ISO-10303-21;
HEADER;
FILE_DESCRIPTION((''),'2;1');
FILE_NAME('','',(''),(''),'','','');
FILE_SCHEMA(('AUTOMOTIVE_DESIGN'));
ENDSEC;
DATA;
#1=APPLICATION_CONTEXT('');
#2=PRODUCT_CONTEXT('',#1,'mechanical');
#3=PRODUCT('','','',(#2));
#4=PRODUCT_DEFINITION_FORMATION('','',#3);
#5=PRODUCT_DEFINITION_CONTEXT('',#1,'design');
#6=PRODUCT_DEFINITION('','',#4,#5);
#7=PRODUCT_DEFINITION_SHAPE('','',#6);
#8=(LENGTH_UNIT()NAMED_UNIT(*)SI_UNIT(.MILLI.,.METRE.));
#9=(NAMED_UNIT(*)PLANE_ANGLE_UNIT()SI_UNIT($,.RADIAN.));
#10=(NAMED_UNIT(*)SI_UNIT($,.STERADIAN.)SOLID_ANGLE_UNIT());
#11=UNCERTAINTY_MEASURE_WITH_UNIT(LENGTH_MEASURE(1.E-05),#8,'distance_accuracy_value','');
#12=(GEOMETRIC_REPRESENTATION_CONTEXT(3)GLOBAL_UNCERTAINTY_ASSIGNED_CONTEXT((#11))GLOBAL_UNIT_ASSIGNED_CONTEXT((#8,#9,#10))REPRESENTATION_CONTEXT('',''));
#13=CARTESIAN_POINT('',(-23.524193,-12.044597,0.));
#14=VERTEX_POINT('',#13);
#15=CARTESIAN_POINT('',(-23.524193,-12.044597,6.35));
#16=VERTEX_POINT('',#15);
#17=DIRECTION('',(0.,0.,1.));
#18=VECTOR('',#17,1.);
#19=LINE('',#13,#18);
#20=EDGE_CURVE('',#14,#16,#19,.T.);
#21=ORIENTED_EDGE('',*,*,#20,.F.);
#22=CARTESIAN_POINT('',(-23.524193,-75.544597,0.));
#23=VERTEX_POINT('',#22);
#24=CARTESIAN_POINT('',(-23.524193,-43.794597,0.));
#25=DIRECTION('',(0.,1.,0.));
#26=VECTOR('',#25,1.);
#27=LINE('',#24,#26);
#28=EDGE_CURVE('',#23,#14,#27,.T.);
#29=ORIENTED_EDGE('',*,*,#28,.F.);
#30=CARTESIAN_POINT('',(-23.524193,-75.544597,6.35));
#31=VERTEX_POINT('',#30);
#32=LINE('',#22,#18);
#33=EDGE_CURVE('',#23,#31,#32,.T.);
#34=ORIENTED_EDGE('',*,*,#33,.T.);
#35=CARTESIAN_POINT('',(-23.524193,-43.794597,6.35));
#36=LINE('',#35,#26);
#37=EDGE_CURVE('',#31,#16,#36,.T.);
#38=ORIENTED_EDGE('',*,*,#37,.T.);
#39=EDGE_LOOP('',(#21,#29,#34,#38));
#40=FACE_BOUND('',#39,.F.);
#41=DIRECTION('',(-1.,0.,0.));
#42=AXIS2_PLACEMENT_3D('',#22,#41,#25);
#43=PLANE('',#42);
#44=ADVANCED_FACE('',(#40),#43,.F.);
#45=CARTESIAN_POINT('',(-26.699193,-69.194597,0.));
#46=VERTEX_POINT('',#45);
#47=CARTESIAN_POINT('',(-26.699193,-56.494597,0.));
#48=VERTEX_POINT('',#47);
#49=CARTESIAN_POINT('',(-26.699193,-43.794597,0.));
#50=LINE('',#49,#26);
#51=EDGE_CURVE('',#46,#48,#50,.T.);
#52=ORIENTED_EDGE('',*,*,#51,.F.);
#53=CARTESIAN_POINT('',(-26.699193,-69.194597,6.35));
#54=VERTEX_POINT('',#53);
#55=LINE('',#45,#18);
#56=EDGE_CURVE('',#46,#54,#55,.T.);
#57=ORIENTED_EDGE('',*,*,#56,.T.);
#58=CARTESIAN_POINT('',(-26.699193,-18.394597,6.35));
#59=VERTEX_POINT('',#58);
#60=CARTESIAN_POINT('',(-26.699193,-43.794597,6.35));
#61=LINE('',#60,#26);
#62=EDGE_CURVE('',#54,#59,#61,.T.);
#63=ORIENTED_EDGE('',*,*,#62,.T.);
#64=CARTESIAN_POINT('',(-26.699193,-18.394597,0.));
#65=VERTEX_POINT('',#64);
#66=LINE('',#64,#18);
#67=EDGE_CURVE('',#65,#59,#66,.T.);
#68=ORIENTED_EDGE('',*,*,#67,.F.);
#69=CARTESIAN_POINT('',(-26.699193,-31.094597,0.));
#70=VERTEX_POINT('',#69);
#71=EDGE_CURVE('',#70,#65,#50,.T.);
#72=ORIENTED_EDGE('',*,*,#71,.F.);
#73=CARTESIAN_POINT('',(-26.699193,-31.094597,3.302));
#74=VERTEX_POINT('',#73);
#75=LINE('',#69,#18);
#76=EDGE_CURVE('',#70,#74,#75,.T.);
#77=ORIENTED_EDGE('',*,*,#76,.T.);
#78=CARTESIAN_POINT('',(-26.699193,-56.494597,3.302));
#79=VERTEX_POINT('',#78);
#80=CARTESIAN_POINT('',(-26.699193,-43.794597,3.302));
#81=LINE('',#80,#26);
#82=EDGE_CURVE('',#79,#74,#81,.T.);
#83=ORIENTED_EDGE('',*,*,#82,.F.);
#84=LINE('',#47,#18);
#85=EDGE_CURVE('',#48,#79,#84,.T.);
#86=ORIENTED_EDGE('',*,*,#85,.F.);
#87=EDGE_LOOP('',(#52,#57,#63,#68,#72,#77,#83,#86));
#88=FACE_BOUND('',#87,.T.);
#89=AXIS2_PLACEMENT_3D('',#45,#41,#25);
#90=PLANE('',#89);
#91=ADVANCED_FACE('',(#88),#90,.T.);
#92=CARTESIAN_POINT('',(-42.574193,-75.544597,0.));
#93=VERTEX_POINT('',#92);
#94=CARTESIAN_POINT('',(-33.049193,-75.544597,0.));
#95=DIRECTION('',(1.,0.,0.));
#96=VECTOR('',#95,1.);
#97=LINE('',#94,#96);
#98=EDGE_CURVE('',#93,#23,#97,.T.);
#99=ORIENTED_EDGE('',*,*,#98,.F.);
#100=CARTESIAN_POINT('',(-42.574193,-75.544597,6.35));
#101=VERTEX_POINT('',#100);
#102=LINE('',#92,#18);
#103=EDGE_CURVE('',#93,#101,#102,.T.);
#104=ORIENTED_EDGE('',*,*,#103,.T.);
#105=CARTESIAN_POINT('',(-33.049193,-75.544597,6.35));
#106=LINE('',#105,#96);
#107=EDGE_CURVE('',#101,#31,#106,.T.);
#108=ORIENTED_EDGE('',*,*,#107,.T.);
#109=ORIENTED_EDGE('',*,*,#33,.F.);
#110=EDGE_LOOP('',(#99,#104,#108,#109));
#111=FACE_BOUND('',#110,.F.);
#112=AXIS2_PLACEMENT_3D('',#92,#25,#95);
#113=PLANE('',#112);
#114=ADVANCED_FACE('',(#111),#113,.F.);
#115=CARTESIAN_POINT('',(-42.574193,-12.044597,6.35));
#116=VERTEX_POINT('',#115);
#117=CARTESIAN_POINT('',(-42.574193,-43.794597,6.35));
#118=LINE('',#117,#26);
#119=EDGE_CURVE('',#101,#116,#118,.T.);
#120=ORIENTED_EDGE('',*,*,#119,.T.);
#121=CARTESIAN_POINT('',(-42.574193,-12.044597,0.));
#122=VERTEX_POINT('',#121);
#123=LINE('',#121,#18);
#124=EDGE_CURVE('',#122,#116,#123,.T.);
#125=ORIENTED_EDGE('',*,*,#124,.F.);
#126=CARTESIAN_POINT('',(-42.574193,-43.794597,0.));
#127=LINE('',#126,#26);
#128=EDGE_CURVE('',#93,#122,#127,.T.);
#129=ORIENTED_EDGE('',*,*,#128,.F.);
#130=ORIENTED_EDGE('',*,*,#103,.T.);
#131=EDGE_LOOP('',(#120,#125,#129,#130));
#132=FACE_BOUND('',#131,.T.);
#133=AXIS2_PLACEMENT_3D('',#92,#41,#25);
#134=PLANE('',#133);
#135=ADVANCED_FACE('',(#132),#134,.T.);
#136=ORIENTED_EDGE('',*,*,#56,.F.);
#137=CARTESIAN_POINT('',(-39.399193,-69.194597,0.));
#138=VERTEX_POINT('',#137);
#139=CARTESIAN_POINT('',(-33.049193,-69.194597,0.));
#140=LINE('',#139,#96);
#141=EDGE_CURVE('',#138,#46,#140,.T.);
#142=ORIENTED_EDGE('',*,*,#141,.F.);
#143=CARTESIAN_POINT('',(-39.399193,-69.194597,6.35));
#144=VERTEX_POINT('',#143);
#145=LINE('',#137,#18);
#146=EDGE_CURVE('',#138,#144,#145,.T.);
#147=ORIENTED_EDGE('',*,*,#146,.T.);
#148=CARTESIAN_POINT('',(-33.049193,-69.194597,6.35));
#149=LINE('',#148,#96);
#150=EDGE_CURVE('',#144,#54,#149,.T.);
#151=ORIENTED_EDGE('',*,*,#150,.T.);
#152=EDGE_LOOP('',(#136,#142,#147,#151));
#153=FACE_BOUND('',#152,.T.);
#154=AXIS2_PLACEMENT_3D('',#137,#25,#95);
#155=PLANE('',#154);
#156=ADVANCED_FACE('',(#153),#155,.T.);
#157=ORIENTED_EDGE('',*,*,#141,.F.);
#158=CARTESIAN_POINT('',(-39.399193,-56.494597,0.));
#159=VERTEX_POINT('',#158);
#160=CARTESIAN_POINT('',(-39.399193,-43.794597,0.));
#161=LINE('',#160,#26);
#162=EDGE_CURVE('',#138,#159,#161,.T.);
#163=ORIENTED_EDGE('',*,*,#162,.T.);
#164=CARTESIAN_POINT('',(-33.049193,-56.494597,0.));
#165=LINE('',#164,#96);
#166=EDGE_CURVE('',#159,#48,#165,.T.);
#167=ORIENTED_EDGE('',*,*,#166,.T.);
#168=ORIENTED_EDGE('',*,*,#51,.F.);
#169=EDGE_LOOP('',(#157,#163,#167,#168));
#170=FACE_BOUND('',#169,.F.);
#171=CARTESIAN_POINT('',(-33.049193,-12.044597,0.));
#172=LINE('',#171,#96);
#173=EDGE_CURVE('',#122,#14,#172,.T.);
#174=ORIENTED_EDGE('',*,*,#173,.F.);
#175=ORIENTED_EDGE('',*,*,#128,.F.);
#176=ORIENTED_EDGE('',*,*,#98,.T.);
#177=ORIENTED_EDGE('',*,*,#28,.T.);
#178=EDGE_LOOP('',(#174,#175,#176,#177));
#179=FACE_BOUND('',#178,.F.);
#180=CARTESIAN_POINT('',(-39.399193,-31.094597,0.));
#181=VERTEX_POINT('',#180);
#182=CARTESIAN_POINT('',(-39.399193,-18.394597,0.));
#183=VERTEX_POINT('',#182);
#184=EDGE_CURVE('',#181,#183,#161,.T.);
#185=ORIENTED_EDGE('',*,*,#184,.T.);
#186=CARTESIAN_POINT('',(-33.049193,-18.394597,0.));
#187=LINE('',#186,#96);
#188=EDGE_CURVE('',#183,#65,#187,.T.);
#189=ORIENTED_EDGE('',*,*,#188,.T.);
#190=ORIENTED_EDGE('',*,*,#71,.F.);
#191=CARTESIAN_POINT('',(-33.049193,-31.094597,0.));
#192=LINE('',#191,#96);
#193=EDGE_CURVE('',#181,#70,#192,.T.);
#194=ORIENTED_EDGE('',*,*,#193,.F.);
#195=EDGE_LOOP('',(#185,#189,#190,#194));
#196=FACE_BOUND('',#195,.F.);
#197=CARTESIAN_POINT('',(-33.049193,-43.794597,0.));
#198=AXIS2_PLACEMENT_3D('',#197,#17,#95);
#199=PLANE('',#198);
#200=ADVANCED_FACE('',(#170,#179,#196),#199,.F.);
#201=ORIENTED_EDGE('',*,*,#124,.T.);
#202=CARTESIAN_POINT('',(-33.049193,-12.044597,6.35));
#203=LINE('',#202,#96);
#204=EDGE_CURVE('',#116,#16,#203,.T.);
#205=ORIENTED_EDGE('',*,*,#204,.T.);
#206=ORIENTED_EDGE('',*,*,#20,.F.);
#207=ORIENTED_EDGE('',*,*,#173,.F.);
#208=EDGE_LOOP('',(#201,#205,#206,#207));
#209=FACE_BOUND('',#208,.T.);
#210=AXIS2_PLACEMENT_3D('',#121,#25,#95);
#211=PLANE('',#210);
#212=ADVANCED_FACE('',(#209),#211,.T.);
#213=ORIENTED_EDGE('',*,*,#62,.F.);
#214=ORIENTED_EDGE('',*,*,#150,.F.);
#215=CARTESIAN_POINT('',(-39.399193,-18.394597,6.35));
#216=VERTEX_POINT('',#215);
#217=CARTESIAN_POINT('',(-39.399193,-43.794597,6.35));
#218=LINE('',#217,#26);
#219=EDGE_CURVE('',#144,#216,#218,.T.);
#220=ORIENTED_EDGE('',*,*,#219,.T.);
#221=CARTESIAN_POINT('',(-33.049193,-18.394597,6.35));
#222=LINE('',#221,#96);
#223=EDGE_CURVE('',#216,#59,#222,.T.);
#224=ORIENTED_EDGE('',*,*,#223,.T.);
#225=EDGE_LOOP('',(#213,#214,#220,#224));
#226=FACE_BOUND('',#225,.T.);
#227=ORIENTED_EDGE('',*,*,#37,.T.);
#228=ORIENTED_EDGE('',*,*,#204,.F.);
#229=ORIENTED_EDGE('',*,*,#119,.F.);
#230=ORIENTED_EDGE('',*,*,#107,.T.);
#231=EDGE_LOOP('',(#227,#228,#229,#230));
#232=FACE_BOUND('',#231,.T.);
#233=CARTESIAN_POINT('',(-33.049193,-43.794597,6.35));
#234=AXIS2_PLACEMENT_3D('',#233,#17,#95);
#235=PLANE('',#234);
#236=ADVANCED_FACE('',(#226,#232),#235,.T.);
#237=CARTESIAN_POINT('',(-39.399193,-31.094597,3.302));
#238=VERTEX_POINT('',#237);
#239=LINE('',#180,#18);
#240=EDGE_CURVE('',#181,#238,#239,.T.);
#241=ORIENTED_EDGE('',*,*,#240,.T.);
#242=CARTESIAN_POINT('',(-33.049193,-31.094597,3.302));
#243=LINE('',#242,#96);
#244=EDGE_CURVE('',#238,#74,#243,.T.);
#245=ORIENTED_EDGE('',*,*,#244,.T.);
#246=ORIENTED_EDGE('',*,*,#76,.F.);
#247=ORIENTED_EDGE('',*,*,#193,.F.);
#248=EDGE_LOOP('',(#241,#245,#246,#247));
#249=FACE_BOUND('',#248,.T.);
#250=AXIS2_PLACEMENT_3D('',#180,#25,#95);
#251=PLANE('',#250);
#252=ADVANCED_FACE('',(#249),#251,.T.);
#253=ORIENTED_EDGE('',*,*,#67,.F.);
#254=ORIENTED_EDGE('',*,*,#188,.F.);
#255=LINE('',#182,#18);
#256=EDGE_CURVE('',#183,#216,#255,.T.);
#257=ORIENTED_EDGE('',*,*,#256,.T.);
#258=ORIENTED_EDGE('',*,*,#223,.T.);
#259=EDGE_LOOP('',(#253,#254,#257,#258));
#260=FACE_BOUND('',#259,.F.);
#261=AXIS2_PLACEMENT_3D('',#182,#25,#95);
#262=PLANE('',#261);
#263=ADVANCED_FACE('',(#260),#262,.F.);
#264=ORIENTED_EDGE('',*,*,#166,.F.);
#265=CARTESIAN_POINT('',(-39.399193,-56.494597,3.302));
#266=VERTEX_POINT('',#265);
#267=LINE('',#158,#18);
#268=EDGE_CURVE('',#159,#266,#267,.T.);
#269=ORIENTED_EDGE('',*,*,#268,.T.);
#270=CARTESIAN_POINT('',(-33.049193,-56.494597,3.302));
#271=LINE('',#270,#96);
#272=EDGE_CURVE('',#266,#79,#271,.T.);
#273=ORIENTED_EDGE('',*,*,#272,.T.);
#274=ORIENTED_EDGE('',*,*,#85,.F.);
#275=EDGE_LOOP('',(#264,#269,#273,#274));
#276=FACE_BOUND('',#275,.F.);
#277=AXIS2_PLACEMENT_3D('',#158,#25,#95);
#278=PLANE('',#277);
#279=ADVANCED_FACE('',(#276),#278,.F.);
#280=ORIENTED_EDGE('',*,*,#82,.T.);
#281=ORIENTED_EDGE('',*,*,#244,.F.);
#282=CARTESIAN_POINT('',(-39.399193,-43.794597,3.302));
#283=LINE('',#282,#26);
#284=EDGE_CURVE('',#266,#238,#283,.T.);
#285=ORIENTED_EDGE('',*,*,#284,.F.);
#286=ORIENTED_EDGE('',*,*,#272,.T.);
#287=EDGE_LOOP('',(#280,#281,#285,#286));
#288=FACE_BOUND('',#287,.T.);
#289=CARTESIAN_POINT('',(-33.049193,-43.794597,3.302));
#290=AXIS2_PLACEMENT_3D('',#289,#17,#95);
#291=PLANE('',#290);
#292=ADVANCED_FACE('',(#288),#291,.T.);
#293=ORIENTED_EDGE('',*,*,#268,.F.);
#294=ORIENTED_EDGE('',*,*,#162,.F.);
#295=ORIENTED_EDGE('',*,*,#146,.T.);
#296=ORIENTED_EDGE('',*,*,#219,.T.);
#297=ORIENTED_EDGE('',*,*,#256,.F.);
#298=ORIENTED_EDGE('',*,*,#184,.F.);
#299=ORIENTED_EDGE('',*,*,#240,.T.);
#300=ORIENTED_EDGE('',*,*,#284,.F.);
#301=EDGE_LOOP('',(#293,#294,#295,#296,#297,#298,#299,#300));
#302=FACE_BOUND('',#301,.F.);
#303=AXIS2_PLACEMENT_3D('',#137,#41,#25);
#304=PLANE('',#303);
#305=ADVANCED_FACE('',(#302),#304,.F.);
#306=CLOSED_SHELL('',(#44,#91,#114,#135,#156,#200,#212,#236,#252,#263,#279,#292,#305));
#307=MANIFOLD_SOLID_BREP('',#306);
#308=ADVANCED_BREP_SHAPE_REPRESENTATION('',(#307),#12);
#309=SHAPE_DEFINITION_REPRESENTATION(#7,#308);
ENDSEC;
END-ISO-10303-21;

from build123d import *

# Parameters (mm, degrees)
F0_W     = 19.05
F0_H     = 63.5
F0_W_2   = 12.7
F0_H_2   = 50.8
F1_DEPTH = 6.35
F2_W     = 12.7
F2_H     = 25.4
F3_DEPTH = 3.302


# Not quite as in the source:
# - the program builds the solid bodies; features that only make, move or delete a surface that nothing else refers to are left out


with BuildPart() as f1:
    # F0 (on Top) → F1 (new body)
    with BuildSketch(Plane.XY):
        with Locations((-33.0491933286, -43.7945974991)):
            Rectangle(F0_W, F0_H)
        with Locations((-33.0491933286, -43.7945974991)):
            Rectangle(F0_W_2, F0_H_2, mode=Mode.SUBTRACT)
    extrude(amount=F1_DEPTH)

    # F2 (on Top) → F3 (join)
    with BuildSketch(Plane.XY):
        with Locations((-33.0491933286, -43.7945974991)):
            Rectangle(F2_W, F2_H)
    extrude(amount=F3_DEPTH)


solid = f1.part
